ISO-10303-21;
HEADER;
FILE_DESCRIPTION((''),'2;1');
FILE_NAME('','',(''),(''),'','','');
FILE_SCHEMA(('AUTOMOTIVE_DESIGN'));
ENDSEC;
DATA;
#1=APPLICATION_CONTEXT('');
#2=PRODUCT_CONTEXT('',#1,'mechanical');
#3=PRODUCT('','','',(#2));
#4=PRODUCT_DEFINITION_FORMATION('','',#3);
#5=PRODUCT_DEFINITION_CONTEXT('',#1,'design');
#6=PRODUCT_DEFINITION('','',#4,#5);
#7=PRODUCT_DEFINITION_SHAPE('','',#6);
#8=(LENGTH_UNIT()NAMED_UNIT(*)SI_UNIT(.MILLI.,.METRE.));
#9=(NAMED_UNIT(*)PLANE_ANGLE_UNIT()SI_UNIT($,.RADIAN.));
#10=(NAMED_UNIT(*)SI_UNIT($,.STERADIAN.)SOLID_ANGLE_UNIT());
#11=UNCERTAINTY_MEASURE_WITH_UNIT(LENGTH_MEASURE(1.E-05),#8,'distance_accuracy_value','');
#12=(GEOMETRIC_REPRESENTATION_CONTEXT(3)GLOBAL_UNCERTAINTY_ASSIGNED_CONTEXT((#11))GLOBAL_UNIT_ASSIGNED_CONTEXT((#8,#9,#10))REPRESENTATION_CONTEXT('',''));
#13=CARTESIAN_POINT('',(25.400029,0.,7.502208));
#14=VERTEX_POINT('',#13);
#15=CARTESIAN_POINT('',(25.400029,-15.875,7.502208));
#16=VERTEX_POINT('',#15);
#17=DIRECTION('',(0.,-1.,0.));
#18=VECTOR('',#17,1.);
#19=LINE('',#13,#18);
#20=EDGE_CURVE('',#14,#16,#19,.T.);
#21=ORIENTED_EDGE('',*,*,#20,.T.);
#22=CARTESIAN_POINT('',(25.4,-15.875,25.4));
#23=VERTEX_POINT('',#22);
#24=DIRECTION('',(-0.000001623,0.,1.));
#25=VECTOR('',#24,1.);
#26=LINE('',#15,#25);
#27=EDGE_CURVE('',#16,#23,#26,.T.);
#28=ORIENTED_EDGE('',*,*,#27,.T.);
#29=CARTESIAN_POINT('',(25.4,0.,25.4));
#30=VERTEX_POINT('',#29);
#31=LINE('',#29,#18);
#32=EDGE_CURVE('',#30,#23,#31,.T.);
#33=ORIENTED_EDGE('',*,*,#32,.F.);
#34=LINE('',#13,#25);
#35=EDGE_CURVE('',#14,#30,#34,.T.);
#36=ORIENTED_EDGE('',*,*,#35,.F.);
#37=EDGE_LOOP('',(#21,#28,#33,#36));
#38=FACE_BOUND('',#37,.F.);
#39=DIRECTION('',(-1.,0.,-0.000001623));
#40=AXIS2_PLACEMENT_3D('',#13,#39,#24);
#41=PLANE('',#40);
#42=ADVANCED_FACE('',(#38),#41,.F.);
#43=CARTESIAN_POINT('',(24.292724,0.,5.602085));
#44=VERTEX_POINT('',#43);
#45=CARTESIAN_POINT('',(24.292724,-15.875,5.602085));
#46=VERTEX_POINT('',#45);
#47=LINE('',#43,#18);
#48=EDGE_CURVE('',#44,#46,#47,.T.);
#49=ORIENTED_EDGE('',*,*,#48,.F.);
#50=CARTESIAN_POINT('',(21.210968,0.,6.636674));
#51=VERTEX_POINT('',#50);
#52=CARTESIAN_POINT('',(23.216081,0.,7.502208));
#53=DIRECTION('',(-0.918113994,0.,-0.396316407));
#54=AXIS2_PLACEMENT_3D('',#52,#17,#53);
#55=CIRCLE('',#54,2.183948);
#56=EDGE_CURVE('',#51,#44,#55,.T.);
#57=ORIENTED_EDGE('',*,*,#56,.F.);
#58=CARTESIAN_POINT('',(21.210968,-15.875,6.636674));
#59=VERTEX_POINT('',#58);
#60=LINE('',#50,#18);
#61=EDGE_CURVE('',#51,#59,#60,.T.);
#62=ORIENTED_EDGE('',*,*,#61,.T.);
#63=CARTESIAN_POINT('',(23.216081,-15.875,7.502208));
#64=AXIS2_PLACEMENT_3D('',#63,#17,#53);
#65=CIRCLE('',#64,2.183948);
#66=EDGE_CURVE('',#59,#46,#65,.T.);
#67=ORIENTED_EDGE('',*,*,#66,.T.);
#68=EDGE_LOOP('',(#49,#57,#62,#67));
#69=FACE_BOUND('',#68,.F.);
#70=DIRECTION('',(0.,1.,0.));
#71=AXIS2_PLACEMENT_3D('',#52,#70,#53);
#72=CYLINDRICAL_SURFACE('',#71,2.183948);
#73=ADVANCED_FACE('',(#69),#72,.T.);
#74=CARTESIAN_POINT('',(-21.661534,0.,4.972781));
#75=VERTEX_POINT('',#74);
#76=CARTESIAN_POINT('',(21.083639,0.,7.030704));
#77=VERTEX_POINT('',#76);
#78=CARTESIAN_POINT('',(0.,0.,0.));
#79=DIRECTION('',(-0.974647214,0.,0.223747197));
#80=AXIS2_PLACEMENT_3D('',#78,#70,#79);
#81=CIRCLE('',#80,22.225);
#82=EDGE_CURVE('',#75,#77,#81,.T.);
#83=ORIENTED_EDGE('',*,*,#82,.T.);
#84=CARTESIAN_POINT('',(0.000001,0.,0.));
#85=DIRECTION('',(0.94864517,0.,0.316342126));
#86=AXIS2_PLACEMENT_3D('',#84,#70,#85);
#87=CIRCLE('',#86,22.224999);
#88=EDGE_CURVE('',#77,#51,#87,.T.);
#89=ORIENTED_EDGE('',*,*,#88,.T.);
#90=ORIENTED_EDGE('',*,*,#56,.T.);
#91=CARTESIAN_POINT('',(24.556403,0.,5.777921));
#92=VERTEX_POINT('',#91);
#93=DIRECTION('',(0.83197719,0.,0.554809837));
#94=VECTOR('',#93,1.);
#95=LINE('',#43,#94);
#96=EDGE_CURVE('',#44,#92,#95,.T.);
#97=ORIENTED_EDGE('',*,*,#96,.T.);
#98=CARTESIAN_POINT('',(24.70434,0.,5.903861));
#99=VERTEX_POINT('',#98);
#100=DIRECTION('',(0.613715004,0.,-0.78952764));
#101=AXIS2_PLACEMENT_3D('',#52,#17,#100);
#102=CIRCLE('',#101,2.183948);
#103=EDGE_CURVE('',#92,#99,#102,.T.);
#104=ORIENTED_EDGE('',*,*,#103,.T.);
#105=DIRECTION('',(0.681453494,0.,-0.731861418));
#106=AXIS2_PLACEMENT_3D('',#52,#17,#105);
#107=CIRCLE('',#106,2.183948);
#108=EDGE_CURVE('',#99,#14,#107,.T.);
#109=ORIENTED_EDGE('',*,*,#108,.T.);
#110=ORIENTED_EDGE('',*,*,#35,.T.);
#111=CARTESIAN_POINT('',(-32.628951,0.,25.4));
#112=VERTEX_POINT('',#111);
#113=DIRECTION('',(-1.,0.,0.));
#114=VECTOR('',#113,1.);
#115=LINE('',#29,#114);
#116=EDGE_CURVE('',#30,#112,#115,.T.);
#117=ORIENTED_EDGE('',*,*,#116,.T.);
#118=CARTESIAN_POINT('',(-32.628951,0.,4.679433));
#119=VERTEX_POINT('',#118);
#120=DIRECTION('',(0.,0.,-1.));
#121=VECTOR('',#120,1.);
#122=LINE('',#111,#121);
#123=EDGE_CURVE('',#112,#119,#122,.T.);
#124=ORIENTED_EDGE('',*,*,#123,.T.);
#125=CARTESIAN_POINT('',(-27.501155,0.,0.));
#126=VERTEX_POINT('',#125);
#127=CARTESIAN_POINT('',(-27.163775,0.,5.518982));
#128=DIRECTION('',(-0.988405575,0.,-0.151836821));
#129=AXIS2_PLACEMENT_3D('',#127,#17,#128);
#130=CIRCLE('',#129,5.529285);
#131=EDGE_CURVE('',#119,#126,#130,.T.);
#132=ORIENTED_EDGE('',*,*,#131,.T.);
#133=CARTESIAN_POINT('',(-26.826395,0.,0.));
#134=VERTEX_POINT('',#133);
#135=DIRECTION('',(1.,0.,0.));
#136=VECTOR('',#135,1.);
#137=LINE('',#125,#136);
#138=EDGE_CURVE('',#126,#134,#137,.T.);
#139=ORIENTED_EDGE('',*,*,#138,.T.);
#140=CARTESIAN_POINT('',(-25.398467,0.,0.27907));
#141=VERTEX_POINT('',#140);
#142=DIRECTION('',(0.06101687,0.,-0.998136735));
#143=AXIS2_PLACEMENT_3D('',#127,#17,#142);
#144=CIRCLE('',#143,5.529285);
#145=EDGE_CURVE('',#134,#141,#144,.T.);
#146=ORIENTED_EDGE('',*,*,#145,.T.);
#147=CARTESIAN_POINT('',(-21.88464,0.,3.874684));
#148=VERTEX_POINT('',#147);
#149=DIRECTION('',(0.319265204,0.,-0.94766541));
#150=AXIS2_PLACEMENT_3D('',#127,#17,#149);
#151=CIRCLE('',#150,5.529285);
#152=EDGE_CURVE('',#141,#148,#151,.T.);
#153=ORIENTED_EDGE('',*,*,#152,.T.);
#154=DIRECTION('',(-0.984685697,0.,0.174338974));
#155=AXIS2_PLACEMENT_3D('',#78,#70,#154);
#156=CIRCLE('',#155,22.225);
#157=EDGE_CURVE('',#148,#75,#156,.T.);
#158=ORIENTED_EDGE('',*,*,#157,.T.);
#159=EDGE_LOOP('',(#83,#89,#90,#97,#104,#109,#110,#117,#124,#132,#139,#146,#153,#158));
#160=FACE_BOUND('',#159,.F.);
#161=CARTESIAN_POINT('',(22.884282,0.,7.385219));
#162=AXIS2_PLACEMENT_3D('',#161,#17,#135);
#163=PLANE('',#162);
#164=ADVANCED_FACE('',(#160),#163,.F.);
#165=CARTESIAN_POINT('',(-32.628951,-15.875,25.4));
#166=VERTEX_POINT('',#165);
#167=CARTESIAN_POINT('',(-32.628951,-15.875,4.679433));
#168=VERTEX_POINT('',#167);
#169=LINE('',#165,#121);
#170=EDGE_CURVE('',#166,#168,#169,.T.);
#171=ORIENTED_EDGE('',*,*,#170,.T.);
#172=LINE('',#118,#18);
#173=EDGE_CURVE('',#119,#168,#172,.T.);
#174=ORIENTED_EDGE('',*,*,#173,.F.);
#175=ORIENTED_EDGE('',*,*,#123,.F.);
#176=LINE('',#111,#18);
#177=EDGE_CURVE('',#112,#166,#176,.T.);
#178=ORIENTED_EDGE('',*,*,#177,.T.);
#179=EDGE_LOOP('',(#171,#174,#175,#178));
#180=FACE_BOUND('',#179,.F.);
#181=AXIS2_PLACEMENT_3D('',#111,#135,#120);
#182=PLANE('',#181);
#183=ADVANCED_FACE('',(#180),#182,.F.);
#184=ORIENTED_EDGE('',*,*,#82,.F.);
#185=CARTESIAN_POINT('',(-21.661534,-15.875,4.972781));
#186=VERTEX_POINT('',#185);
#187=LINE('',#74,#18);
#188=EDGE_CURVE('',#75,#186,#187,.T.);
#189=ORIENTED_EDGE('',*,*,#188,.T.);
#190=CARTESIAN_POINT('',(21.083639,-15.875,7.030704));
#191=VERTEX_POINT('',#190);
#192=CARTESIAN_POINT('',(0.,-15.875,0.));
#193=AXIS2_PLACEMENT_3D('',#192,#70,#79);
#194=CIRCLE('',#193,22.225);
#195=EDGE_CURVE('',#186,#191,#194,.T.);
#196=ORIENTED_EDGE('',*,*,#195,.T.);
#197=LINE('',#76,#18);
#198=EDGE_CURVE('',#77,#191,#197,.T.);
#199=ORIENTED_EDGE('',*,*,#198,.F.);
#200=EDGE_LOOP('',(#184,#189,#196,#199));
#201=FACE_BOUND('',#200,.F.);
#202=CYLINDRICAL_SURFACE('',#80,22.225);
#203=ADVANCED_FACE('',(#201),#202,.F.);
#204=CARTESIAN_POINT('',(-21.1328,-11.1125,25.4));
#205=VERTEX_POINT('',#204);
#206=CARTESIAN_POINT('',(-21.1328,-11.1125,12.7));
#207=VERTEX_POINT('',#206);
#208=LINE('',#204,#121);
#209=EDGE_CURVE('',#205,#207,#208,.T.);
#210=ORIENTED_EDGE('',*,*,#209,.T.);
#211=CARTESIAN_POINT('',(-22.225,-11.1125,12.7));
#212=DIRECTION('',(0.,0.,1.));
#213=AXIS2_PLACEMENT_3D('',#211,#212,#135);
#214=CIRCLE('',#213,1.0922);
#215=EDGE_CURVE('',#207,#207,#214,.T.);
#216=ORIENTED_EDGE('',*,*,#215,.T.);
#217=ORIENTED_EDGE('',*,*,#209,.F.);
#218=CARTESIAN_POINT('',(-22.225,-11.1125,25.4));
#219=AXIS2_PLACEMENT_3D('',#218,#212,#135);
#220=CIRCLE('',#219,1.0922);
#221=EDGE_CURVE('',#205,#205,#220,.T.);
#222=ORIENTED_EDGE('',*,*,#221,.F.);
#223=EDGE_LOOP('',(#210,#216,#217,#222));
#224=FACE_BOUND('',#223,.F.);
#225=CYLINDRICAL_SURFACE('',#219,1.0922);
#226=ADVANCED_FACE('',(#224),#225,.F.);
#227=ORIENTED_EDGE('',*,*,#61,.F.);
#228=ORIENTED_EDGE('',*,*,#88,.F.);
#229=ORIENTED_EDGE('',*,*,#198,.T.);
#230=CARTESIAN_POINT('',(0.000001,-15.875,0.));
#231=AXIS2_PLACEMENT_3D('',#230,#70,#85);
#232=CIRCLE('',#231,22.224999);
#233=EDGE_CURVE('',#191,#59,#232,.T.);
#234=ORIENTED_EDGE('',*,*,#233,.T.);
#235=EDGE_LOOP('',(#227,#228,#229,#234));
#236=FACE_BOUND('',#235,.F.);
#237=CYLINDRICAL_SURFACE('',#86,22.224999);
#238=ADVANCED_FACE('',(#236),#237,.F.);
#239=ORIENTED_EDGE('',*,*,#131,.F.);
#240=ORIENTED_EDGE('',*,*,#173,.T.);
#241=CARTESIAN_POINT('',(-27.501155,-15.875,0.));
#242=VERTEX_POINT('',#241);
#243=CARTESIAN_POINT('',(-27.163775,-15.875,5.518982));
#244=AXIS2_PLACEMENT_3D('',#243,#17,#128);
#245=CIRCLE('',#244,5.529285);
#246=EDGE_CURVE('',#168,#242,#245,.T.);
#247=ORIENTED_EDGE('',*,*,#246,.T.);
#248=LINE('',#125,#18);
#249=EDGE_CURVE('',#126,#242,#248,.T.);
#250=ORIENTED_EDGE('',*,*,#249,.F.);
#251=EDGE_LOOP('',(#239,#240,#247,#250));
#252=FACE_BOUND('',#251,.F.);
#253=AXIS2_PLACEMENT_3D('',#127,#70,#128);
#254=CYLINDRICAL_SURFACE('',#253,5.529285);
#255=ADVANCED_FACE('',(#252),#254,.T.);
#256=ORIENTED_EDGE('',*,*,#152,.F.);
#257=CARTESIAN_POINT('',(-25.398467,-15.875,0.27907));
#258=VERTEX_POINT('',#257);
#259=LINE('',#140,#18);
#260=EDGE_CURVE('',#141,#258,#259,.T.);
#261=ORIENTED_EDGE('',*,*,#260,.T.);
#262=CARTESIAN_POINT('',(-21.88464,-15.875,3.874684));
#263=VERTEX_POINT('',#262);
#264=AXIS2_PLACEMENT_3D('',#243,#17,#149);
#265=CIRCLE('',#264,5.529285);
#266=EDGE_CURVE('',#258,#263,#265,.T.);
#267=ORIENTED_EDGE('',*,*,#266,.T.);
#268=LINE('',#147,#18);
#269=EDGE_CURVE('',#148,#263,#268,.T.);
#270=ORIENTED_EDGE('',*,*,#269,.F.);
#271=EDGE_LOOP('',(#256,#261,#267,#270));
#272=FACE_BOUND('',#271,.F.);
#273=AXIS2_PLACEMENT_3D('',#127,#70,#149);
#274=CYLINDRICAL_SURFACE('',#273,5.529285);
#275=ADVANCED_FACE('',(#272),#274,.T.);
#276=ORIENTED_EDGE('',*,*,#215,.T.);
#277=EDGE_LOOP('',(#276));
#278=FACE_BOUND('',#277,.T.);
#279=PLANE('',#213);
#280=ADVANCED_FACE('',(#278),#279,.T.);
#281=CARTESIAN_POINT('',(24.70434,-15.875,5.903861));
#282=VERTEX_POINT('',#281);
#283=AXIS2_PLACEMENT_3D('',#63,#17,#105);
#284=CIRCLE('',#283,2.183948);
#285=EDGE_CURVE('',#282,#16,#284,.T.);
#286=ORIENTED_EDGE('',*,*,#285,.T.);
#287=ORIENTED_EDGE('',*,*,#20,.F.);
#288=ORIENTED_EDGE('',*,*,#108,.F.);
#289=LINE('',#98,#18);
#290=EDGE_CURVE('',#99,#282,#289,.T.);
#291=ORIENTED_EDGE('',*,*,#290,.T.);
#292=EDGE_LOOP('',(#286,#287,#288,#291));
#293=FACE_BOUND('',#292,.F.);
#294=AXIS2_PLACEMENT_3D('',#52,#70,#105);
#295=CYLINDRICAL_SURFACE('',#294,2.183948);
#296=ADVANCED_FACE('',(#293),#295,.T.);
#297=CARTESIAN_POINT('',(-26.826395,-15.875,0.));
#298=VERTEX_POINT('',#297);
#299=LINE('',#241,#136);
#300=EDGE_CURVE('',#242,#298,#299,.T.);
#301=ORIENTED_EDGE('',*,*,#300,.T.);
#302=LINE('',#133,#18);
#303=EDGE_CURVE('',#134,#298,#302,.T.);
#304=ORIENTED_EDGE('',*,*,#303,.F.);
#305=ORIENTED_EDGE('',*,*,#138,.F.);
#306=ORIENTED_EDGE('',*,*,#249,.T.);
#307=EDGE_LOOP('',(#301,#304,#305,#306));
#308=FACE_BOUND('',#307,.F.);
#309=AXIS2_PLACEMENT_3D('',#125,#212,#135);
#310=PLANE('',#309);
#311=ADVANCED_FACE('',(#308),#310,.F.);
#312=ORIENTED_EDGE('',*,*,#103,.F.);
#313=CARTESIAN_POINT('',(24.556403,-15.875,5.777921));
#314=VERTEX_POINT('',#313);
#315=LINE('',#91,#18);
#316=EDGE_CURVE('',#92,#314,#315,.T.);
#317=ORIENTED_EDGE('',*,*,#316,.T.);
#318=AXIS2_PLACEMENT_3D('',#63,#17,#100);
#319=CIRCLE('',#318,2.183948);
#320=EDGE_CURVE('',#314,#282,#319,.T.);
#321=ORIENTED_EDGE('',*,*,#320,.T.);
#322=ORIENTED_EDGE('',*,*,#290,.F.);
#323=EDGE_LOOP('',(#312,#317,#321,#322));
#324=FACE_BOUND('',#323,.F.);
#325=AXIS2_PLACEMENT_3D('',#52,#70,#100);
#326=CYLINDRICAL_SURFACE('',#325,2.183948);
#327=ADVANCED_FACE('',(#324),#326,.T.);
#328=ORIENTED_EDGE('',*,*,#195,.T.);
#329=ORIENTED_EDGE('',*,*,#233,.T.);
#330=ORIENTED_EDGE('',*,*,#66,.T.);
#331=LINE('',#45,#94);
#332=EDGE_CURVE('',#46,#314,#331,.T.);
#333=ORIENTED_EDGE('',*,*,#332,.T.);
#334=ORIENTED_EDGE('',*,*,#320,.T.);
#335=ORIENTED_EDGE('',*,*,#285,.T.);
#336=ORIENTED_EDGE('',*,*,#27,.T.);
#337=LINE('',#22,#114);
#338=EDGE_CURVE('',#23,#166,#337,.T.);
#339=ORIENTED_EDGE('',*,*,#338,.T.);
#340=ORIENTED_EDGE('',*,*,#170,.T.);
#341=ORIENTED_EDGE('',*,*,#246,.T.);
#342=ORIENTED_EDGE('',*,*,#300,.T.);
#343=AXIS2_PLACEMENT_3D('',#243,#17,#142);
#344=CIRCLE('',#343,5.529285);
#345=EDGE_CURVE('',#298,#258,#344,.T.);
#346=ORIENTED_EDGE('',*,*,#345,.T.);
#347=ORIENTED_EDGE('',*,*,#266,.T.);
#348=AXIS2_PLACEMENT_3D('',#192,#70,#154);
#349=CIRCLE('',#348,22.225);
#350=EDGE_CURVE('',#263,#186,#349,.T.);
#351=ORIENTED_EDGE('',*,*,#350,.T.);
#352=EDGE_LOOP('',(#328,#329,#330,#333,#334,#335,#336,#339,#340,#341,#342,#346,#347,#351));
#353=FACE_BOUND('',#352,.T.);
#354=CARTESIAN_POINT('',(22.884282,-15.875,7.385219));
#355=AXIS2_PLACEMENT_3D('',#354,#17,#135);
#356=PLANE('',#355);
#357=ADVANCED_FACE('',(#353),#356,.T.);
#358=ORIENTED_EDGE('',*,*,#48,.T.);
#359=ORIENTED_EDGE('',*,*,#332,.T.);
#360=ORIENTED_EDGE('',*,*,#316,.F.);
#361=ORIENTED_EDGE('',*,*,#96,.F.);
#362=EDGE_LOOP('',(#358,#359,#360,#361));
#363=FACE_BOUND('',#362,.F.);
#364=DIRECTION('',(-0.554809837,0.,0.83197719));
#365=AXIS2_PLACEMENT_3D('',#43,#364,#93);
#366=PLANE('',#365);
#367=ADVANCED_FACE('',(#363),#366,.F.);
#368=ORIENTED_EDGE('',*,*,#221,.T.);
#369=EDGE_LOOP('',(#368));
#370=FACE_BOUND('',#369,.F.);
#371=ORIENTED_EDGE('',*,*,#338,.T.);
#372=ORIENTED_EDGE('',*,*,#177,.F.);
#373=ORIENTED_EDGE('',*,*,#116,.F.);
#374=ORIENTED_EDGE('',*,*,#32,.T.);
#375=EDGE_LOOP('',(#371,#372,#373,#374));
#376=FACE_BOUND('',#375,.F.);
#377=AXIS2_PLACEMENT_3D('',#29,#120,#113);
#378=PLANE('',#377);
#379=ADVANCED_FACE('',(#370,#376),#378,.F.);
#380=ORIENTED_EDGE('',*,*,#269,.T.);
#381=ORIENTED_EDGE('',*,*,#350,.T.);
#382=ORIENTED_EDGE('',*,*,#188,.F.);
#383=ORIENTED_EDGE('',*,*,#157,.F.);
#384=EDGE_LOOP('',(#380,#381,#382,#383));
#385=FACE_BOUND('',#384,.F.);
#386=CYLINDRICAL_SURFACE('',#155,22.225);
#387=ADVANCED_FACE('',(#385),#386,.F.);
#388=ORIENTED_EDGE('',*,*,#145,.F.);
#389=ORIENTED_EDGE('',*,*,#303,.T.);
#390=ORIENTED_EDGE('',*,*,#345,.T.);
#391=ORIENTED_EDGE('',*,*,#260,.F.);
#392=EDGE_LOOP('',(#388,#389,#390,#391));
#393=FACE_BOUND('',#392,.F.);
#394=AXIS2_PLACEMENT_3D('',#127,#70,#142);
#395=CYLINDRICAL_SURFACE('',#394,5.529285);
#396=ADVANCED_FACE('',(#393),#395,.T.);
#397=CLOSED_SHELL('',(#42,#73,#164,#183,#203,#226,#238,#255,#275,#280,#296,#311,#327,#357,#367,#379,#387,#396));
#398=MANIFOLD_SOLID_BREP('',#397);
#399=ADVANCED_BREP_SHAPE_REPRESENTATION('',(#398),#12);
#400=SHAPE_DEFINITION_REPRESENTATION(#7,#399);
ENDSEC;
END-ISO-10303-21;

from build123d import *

# Parameters (mm, degrees)
F1_DEPTH = 15.875
F2_R     = 1.0922
F3_DEPTH = 12.7


# Not quite as in the source:
# - ends of sketch curves that miss each other by under 0.0002 mm in the source are joined


with BuildPart() as f1:
    # F0 (on Front) → F1 (new body)
    with BuildSketch(Plane.XZ):
        with BuildLine():
            ThreePointArc((21.0836389118, 7.0307037512), (21.1482213946, 6.8339854292), (21.2109684651, 6.6366739991))
            ThreePointArc((21.2109684651, 6.6366739991), (22.5210215532, 5.4318172042), (24.2927235367, 5.6020848515))
            Line((24.2927235367, 5.6020848515), (24.5564028335, 5.7779212439))
            ThreePointArc((24.5564028335, 5.7779212439), (24.6317726398, 5.83924537), (24.7043401509, 5.9038612541))
            ThreePointArc((24.7043401509, 5.9038612541), (24.1693958795, 7.8102690619), (23.4875772319, 9.6692148479))
            ThreePointArc((23.4875772319, 9.6692148479), (21.6017035502, 8.9730623402), (21.0836389118, 7.0307037512))
        make_face()
        with BuildLine():
            ThreePointArc((-25.3984668781, 0.2790703183), (-23.2092642977, 1.6544209311), (-21.8846396204, 3.8746836882))
            ThreePointArc((-21.8846396204, 3.8746836882), (-21.7800085202, 4.4251388519), (-21.6615343316, 4.9727814551))
            ThreePointArc((-21.6615343316, 4.9727814551), (-21.6412555699, 5.2455472098), (-21.6344904646, 5.5189820621))
            ThreePointArc((-21.6344904646, 5.5189820621), (-22.1206425964, 7.786095443), (-23.4936109358, 9.6545453128))
            ThreePointArc((-23.4936109358, 9.6545453128), (-24.8914383088, 5.057301545), (-25.3984668781, 0.2790703183))
        make_face()
        with BuildLine():
            Line((0, 25.4), (0, 22.225))
            ThreePointArc((0, 22.225), (12.9940993172, 18.0306408077), (21.0836389118, 7.0307037512))
            ThreePointArc((21.0836389118, 7.0307037512), (21.6017035502, 8.9730623402), (23.4875772319, 9.6692148479))
            ThreePointArc((23.4875772319, 9.6692148479), (14.1343896731, 21.1040050362), (0, 25.4))
        make_face()
        with BuildLine():
            ThreePointArc((-21.6615343316, 4.9727814551), (-13.8461286495, 17.3849172106), (0, 22.225))
            Line((0, 22.225), (0, 25.4))
            ThreePointArc((0, 25.4), (-14.1409785562, 21.099590647), (-23.4936109358, 9.6545453128))
            ThreePointArc((-23.4936109358, 9.6545453128), (-22.1206425964, 7.786095443), (-21.6344904646, 5.5189820621))
            ThreePointArc((-21.6344904646, 5.5189820621), (-21.6412555699, 5.2455472098), (-21.6615343316, 4.9727814551))
        make_face()
        with BuildLine():
            ThreePointArc((-26.8263954087, 0), (-26.1032119587, 0.0923630453), (-25.3984668781, 0.2790703183))
            ThreePointArc((-25.3984668781, 0.2790703183), (-24.8914383088, 5.057301545), (-23.4936109358, 9.6545453128))
            ThreePointArc((-23.4936109358, 9.6545453128), (-29.0403261825, 10.7200919312), (-32.6289507574, 6.3585310541))
            Line((-32.6289507574, 6.3585310541), (-32.6289507574, 4.6794330701))
            ThreePointArc((-32.6289507574, 4.6794330701), (-30.8909302127, 1.4347070449), (-27.501154691, 0))
            Line((-27.501154691, 0), (-26.8263954087, 0))
        make_face()
        with BuildLine():
            ThreePointArc((23.4875772319, 9.6692148479), (24.1693958795, 7.8102690619), (24.7043401509, 5.9038612541))
            ThreePointArc((24.7043401509, 5.9038612541), (25.2185681707, 6.630615454), (25.4000290489, 7.5022082908))
            ThreePointArc((25.4000290489, 7.5022082908), (24.8535428533, 8.9473198237), (23.4875772319, 9.6692148479))
        make_face()
        with BuildLine():
            ThreePointArc((23.4875772319, 9.6692148479), (24.8535428533, 8.9473198237), (25.4000290489, 7.5022082908))
            Line((25.4000290489, 7.5022082908), (25.4, 25.4))
            Line((25.4, 25.4), (0, 25.4))
            ThreePointArc((0, 25.4), (14.1343896731, 21.1040050362), (23.4875772319, 9.6692148479))
        make_face()
        with BuildLine():
            ThreePointArc((-23.4936109358, 9.6545453128), (-14.1409785562, 21.099590647), (0, 25.4))
            Line((0, 25.4), (-25.3993433231, 25.4))
            Line((-25.3993433231, 25.4), (-32.6289507574, 25.4))
            Line((-32.6289507574, 25.4), (-32.6289507574, 6.3585310541))
            ThreePointArc((-32.6289507574, 6.3585310541), (-29.0403261825, 10.7200919312), (-23.4936109358, 9.6545453128))
        make_face()
    extrude(amount=F1_DEPTH)

    # F2 (on face) → F3 (cut)
    with BuildSketch(Plane.XY.offset(25.4)):
        with Locations((-22.225, -11.1125)):
            Circle(F2_R)
    extrude(amount=-F3_DEPTH, mode=Mode.SUBTRACT)


solid = f1.part
